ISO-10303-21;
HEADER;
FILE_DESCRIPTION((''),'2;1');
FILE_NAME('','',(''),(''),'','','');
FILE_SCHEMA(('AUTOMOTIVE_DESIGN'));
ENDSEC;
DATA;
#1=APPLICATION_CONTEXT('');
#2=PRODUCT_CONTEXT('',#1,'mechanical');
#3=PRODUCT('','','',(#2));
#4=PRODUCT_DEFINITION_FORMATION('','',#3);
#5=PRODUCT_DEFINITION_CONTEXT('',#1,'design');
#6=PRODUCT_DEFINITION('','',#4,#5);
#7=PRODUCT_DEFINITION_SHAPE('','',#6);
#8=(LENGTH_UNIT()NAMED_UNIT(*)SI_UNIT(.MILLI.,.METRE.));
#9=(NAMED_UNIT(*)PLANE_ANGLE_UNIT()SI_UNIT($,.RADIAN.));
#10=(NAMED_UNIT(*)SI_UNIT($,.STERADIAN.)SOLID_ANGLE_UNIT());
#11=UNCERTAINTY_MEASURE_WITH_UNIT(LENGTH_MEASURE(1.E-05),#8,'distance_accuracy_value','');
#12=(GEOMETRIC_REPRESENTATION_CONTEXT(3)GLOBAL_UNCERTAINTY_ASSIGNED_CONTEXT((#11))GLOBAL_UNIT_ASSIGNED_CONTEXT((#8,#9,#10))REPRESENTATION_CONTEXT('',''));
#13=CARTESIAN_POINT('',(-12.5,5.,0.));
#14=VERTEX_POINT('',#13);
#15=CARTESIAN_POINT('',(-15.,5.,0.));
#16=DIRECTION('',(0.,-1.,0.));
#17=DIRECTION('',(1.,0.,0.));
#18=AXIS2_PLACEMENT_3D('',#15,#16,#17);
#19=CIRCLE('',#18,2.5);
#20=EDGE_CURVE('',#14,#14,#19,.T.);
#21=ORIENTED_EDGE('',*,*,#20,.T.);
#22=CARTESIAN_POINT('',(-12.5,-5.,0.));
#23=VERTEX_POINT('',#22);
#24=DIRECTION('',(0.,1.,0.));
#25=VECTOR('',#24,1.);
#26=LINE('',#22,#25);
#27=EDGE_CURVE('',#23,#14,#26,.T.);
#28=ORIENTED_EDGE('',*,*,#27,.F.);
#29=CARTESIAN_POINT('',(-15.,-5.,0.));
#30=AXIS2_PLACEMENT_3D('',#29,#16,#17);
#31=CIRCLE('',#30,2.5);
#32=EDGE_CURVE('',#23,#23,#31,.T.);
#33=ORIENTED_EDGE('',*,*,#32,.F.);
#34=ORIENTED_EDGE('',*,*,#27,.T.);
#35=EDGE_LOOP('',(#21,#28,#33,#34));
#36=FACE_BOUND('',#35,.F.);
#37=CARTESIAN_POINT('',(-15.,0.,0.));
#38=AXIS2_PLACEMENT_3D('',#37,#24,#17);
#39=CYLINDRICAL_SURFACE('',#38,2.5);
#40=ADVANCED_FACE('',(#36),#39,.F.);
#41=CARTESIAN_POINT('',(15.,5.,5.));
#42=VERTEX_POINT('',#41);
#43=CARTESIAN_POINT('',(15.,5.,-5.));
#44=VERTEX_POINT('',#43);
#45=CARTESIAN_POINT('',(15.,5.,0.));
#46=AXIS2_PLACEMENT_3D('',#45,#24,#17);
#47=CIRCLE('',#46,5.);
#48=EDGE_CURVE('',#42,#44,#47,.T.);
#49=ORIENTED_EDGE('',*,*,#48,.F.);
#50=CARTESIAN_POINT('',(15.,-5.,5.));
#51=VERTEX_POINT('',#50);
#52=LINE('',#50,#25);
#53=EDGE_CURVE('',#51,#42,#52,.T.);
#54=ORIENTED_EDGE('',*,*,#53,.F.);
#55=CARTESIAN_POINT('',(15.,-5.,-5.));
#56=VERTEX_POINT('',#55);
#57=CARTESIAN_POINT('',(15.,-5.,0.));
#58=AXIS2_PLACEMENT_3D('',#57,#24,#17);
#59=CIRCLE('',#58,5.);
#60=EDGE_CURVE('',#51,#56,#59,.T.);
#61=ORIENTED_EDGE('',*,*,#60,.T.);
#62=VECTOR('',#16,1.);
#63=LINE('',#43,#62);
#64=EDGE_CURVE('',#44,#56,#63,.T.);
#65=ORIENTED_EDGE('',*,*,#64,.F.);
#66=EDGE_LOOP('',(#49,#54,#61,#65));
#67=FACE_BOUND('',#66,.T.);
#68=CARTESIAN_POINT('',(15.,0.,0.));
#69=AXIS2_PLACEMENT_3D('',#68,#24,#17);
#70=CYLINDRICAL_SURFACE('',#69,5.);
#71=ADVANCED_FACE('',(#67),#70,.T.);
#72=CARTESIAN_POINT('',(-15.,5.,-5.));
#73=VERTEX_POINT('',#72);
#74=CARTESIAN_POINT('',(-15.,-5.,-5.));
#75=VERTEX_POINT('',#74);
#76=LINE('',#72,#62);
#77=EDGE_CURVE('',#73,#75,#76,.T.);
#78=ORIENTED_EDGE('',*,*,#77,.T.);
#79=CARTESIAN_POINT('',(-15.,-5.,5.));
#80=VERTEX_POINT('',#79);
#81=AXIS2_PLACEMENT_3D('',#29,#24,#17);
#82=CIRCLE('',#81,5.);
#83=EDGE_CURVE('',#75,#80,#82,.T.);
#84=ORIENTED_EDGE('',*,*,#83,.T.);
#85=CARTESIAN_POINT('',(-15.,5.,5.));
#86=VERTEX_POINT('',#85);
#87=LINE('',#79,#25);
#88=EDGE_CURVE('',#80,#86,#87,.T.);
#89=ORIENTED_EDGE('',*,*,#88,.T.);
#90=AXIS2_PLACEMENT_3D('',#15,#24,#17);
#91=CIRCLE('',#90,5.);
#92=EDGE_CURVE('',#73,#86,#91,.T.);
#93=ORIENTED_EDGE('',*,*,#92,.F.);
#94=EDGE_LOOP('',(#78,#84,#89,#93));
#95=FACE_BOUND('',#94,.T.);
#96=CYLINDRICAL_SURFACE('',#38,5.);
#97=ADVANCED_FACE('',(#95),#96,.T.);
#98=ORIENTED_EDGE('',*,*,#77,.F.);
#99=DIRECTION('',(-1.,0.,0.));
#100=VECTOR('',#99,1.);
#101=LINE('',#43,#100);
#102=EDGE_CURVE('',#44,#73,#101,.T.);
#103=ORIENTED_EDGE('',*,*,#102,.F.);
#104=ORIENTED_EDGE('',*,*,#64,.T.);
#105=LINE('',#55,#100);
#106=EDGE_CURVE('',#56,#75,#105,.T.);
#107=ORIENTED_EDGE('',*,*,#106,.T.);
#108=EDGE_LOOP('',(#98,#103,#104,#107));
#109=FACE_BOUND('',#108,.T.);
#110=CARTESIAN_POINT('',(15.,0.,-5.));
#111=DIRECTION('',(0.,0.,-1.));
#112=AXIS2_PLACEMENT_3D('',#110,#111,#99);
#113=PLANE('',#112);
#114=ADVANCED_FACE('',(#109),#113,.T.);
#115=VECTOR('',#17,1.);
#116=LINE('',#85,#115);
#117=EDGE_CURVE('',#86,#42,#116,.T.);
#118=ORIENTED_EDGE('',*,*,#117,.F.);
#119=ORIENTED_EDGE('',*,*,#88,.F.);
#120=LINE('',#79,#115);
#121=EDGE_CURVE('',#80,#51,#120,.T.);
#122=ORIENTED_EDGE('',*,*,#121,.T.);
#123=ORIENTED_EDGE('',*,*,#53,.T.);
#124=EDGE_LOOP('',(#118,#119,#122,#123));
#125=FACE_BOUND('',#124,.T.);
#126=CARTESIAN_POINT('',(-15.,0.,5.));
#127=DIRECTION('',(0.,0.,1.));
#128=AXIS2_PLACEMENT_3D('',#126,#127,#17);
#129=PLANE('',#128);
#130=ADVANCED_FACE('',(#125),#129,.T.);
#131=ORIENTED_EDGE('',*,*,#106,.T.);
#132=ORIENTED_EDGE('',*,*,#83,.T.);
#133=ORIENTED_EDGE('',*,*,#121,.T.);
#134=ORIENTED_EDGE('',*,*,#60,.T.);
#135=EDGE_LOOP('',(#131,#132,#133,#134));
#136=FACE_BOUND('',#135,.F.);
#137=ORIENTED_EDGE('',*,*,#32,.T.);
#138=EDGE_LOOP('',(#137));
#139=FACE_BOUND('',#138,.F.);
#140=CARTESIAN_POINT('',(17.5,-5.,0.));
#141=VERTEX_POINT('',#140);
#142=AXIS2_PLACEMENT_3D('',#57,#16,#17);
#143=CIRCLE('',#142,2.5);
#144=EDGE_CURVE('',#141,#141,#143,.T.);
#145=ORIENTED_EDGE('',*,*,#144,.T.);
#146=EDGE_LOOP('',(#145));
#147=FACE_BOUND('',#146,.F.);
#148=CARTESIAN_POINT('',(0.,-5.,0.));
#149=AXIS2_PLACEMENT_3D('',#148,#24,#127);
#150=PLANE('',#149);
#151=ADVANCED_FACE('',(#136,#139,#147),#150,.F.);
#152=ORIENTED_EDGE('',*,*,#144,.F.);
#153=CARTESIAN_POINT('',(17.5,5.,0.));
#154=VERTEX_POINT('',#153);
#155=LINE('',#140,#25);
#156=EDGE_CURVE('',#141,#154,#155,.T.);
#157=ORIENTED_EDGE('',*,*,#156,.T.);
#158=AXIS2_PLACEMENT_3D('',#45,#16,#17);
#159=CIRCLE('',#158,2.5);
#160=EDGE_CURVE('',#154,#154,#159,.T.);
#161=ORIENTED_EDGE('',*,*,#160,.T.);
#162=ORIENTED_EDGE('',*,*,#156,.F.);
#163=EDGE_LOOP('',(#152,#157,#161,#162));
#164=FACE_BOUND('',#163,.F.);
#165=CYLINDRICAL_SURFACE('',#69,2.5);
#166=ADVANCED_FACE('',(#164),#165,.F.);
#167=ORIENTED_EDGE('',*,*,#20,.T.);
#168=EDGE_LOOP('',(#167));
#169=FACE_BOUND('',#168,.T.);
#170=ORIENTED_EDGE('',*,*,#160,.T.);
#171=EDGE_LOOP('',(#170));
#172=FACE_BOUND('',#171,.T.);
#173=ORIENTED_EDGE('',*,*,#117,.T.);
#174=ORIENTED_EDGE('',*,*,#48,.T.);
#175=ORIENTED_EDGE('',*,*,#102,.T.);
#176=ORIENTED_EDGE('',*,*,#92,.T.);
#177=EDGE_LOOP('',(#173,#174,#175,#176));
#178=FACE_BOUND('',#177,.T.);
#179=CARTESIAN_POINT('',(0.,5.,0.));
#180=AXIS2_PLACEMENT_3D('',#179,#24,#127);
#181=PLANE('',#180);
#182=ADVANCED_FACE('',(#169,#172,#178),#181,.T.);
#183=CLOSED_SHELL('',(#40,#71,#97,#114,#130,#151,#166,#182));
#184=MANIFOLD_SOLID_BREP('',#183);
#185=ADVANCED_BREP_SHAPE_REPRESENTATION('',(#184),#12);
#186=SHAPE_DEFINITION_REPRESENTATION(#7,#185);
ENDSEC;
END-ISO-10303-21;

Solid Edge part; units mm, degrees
sketch "Sketch1" plane through (0, 0, 0) normal (0, -1, 0) x (1, 0, 0)
  arc A0 (-15, -5) -> (-15, 5) centre (-15, 0) cw
  line L0 (-15, 5) -> (15, 5)
  arc A1 (15, 5) -> (15, -5) centre (15, 0) cw
  line L1 (15, -5) -> (-15, -5)
  circle A2 centre (15, 0) radius 2.5
  circle A3 centre (-15, 0) radius 2.5
extrude "Protrusion1" add sketch "Sketch1" along normal mid plane 10
